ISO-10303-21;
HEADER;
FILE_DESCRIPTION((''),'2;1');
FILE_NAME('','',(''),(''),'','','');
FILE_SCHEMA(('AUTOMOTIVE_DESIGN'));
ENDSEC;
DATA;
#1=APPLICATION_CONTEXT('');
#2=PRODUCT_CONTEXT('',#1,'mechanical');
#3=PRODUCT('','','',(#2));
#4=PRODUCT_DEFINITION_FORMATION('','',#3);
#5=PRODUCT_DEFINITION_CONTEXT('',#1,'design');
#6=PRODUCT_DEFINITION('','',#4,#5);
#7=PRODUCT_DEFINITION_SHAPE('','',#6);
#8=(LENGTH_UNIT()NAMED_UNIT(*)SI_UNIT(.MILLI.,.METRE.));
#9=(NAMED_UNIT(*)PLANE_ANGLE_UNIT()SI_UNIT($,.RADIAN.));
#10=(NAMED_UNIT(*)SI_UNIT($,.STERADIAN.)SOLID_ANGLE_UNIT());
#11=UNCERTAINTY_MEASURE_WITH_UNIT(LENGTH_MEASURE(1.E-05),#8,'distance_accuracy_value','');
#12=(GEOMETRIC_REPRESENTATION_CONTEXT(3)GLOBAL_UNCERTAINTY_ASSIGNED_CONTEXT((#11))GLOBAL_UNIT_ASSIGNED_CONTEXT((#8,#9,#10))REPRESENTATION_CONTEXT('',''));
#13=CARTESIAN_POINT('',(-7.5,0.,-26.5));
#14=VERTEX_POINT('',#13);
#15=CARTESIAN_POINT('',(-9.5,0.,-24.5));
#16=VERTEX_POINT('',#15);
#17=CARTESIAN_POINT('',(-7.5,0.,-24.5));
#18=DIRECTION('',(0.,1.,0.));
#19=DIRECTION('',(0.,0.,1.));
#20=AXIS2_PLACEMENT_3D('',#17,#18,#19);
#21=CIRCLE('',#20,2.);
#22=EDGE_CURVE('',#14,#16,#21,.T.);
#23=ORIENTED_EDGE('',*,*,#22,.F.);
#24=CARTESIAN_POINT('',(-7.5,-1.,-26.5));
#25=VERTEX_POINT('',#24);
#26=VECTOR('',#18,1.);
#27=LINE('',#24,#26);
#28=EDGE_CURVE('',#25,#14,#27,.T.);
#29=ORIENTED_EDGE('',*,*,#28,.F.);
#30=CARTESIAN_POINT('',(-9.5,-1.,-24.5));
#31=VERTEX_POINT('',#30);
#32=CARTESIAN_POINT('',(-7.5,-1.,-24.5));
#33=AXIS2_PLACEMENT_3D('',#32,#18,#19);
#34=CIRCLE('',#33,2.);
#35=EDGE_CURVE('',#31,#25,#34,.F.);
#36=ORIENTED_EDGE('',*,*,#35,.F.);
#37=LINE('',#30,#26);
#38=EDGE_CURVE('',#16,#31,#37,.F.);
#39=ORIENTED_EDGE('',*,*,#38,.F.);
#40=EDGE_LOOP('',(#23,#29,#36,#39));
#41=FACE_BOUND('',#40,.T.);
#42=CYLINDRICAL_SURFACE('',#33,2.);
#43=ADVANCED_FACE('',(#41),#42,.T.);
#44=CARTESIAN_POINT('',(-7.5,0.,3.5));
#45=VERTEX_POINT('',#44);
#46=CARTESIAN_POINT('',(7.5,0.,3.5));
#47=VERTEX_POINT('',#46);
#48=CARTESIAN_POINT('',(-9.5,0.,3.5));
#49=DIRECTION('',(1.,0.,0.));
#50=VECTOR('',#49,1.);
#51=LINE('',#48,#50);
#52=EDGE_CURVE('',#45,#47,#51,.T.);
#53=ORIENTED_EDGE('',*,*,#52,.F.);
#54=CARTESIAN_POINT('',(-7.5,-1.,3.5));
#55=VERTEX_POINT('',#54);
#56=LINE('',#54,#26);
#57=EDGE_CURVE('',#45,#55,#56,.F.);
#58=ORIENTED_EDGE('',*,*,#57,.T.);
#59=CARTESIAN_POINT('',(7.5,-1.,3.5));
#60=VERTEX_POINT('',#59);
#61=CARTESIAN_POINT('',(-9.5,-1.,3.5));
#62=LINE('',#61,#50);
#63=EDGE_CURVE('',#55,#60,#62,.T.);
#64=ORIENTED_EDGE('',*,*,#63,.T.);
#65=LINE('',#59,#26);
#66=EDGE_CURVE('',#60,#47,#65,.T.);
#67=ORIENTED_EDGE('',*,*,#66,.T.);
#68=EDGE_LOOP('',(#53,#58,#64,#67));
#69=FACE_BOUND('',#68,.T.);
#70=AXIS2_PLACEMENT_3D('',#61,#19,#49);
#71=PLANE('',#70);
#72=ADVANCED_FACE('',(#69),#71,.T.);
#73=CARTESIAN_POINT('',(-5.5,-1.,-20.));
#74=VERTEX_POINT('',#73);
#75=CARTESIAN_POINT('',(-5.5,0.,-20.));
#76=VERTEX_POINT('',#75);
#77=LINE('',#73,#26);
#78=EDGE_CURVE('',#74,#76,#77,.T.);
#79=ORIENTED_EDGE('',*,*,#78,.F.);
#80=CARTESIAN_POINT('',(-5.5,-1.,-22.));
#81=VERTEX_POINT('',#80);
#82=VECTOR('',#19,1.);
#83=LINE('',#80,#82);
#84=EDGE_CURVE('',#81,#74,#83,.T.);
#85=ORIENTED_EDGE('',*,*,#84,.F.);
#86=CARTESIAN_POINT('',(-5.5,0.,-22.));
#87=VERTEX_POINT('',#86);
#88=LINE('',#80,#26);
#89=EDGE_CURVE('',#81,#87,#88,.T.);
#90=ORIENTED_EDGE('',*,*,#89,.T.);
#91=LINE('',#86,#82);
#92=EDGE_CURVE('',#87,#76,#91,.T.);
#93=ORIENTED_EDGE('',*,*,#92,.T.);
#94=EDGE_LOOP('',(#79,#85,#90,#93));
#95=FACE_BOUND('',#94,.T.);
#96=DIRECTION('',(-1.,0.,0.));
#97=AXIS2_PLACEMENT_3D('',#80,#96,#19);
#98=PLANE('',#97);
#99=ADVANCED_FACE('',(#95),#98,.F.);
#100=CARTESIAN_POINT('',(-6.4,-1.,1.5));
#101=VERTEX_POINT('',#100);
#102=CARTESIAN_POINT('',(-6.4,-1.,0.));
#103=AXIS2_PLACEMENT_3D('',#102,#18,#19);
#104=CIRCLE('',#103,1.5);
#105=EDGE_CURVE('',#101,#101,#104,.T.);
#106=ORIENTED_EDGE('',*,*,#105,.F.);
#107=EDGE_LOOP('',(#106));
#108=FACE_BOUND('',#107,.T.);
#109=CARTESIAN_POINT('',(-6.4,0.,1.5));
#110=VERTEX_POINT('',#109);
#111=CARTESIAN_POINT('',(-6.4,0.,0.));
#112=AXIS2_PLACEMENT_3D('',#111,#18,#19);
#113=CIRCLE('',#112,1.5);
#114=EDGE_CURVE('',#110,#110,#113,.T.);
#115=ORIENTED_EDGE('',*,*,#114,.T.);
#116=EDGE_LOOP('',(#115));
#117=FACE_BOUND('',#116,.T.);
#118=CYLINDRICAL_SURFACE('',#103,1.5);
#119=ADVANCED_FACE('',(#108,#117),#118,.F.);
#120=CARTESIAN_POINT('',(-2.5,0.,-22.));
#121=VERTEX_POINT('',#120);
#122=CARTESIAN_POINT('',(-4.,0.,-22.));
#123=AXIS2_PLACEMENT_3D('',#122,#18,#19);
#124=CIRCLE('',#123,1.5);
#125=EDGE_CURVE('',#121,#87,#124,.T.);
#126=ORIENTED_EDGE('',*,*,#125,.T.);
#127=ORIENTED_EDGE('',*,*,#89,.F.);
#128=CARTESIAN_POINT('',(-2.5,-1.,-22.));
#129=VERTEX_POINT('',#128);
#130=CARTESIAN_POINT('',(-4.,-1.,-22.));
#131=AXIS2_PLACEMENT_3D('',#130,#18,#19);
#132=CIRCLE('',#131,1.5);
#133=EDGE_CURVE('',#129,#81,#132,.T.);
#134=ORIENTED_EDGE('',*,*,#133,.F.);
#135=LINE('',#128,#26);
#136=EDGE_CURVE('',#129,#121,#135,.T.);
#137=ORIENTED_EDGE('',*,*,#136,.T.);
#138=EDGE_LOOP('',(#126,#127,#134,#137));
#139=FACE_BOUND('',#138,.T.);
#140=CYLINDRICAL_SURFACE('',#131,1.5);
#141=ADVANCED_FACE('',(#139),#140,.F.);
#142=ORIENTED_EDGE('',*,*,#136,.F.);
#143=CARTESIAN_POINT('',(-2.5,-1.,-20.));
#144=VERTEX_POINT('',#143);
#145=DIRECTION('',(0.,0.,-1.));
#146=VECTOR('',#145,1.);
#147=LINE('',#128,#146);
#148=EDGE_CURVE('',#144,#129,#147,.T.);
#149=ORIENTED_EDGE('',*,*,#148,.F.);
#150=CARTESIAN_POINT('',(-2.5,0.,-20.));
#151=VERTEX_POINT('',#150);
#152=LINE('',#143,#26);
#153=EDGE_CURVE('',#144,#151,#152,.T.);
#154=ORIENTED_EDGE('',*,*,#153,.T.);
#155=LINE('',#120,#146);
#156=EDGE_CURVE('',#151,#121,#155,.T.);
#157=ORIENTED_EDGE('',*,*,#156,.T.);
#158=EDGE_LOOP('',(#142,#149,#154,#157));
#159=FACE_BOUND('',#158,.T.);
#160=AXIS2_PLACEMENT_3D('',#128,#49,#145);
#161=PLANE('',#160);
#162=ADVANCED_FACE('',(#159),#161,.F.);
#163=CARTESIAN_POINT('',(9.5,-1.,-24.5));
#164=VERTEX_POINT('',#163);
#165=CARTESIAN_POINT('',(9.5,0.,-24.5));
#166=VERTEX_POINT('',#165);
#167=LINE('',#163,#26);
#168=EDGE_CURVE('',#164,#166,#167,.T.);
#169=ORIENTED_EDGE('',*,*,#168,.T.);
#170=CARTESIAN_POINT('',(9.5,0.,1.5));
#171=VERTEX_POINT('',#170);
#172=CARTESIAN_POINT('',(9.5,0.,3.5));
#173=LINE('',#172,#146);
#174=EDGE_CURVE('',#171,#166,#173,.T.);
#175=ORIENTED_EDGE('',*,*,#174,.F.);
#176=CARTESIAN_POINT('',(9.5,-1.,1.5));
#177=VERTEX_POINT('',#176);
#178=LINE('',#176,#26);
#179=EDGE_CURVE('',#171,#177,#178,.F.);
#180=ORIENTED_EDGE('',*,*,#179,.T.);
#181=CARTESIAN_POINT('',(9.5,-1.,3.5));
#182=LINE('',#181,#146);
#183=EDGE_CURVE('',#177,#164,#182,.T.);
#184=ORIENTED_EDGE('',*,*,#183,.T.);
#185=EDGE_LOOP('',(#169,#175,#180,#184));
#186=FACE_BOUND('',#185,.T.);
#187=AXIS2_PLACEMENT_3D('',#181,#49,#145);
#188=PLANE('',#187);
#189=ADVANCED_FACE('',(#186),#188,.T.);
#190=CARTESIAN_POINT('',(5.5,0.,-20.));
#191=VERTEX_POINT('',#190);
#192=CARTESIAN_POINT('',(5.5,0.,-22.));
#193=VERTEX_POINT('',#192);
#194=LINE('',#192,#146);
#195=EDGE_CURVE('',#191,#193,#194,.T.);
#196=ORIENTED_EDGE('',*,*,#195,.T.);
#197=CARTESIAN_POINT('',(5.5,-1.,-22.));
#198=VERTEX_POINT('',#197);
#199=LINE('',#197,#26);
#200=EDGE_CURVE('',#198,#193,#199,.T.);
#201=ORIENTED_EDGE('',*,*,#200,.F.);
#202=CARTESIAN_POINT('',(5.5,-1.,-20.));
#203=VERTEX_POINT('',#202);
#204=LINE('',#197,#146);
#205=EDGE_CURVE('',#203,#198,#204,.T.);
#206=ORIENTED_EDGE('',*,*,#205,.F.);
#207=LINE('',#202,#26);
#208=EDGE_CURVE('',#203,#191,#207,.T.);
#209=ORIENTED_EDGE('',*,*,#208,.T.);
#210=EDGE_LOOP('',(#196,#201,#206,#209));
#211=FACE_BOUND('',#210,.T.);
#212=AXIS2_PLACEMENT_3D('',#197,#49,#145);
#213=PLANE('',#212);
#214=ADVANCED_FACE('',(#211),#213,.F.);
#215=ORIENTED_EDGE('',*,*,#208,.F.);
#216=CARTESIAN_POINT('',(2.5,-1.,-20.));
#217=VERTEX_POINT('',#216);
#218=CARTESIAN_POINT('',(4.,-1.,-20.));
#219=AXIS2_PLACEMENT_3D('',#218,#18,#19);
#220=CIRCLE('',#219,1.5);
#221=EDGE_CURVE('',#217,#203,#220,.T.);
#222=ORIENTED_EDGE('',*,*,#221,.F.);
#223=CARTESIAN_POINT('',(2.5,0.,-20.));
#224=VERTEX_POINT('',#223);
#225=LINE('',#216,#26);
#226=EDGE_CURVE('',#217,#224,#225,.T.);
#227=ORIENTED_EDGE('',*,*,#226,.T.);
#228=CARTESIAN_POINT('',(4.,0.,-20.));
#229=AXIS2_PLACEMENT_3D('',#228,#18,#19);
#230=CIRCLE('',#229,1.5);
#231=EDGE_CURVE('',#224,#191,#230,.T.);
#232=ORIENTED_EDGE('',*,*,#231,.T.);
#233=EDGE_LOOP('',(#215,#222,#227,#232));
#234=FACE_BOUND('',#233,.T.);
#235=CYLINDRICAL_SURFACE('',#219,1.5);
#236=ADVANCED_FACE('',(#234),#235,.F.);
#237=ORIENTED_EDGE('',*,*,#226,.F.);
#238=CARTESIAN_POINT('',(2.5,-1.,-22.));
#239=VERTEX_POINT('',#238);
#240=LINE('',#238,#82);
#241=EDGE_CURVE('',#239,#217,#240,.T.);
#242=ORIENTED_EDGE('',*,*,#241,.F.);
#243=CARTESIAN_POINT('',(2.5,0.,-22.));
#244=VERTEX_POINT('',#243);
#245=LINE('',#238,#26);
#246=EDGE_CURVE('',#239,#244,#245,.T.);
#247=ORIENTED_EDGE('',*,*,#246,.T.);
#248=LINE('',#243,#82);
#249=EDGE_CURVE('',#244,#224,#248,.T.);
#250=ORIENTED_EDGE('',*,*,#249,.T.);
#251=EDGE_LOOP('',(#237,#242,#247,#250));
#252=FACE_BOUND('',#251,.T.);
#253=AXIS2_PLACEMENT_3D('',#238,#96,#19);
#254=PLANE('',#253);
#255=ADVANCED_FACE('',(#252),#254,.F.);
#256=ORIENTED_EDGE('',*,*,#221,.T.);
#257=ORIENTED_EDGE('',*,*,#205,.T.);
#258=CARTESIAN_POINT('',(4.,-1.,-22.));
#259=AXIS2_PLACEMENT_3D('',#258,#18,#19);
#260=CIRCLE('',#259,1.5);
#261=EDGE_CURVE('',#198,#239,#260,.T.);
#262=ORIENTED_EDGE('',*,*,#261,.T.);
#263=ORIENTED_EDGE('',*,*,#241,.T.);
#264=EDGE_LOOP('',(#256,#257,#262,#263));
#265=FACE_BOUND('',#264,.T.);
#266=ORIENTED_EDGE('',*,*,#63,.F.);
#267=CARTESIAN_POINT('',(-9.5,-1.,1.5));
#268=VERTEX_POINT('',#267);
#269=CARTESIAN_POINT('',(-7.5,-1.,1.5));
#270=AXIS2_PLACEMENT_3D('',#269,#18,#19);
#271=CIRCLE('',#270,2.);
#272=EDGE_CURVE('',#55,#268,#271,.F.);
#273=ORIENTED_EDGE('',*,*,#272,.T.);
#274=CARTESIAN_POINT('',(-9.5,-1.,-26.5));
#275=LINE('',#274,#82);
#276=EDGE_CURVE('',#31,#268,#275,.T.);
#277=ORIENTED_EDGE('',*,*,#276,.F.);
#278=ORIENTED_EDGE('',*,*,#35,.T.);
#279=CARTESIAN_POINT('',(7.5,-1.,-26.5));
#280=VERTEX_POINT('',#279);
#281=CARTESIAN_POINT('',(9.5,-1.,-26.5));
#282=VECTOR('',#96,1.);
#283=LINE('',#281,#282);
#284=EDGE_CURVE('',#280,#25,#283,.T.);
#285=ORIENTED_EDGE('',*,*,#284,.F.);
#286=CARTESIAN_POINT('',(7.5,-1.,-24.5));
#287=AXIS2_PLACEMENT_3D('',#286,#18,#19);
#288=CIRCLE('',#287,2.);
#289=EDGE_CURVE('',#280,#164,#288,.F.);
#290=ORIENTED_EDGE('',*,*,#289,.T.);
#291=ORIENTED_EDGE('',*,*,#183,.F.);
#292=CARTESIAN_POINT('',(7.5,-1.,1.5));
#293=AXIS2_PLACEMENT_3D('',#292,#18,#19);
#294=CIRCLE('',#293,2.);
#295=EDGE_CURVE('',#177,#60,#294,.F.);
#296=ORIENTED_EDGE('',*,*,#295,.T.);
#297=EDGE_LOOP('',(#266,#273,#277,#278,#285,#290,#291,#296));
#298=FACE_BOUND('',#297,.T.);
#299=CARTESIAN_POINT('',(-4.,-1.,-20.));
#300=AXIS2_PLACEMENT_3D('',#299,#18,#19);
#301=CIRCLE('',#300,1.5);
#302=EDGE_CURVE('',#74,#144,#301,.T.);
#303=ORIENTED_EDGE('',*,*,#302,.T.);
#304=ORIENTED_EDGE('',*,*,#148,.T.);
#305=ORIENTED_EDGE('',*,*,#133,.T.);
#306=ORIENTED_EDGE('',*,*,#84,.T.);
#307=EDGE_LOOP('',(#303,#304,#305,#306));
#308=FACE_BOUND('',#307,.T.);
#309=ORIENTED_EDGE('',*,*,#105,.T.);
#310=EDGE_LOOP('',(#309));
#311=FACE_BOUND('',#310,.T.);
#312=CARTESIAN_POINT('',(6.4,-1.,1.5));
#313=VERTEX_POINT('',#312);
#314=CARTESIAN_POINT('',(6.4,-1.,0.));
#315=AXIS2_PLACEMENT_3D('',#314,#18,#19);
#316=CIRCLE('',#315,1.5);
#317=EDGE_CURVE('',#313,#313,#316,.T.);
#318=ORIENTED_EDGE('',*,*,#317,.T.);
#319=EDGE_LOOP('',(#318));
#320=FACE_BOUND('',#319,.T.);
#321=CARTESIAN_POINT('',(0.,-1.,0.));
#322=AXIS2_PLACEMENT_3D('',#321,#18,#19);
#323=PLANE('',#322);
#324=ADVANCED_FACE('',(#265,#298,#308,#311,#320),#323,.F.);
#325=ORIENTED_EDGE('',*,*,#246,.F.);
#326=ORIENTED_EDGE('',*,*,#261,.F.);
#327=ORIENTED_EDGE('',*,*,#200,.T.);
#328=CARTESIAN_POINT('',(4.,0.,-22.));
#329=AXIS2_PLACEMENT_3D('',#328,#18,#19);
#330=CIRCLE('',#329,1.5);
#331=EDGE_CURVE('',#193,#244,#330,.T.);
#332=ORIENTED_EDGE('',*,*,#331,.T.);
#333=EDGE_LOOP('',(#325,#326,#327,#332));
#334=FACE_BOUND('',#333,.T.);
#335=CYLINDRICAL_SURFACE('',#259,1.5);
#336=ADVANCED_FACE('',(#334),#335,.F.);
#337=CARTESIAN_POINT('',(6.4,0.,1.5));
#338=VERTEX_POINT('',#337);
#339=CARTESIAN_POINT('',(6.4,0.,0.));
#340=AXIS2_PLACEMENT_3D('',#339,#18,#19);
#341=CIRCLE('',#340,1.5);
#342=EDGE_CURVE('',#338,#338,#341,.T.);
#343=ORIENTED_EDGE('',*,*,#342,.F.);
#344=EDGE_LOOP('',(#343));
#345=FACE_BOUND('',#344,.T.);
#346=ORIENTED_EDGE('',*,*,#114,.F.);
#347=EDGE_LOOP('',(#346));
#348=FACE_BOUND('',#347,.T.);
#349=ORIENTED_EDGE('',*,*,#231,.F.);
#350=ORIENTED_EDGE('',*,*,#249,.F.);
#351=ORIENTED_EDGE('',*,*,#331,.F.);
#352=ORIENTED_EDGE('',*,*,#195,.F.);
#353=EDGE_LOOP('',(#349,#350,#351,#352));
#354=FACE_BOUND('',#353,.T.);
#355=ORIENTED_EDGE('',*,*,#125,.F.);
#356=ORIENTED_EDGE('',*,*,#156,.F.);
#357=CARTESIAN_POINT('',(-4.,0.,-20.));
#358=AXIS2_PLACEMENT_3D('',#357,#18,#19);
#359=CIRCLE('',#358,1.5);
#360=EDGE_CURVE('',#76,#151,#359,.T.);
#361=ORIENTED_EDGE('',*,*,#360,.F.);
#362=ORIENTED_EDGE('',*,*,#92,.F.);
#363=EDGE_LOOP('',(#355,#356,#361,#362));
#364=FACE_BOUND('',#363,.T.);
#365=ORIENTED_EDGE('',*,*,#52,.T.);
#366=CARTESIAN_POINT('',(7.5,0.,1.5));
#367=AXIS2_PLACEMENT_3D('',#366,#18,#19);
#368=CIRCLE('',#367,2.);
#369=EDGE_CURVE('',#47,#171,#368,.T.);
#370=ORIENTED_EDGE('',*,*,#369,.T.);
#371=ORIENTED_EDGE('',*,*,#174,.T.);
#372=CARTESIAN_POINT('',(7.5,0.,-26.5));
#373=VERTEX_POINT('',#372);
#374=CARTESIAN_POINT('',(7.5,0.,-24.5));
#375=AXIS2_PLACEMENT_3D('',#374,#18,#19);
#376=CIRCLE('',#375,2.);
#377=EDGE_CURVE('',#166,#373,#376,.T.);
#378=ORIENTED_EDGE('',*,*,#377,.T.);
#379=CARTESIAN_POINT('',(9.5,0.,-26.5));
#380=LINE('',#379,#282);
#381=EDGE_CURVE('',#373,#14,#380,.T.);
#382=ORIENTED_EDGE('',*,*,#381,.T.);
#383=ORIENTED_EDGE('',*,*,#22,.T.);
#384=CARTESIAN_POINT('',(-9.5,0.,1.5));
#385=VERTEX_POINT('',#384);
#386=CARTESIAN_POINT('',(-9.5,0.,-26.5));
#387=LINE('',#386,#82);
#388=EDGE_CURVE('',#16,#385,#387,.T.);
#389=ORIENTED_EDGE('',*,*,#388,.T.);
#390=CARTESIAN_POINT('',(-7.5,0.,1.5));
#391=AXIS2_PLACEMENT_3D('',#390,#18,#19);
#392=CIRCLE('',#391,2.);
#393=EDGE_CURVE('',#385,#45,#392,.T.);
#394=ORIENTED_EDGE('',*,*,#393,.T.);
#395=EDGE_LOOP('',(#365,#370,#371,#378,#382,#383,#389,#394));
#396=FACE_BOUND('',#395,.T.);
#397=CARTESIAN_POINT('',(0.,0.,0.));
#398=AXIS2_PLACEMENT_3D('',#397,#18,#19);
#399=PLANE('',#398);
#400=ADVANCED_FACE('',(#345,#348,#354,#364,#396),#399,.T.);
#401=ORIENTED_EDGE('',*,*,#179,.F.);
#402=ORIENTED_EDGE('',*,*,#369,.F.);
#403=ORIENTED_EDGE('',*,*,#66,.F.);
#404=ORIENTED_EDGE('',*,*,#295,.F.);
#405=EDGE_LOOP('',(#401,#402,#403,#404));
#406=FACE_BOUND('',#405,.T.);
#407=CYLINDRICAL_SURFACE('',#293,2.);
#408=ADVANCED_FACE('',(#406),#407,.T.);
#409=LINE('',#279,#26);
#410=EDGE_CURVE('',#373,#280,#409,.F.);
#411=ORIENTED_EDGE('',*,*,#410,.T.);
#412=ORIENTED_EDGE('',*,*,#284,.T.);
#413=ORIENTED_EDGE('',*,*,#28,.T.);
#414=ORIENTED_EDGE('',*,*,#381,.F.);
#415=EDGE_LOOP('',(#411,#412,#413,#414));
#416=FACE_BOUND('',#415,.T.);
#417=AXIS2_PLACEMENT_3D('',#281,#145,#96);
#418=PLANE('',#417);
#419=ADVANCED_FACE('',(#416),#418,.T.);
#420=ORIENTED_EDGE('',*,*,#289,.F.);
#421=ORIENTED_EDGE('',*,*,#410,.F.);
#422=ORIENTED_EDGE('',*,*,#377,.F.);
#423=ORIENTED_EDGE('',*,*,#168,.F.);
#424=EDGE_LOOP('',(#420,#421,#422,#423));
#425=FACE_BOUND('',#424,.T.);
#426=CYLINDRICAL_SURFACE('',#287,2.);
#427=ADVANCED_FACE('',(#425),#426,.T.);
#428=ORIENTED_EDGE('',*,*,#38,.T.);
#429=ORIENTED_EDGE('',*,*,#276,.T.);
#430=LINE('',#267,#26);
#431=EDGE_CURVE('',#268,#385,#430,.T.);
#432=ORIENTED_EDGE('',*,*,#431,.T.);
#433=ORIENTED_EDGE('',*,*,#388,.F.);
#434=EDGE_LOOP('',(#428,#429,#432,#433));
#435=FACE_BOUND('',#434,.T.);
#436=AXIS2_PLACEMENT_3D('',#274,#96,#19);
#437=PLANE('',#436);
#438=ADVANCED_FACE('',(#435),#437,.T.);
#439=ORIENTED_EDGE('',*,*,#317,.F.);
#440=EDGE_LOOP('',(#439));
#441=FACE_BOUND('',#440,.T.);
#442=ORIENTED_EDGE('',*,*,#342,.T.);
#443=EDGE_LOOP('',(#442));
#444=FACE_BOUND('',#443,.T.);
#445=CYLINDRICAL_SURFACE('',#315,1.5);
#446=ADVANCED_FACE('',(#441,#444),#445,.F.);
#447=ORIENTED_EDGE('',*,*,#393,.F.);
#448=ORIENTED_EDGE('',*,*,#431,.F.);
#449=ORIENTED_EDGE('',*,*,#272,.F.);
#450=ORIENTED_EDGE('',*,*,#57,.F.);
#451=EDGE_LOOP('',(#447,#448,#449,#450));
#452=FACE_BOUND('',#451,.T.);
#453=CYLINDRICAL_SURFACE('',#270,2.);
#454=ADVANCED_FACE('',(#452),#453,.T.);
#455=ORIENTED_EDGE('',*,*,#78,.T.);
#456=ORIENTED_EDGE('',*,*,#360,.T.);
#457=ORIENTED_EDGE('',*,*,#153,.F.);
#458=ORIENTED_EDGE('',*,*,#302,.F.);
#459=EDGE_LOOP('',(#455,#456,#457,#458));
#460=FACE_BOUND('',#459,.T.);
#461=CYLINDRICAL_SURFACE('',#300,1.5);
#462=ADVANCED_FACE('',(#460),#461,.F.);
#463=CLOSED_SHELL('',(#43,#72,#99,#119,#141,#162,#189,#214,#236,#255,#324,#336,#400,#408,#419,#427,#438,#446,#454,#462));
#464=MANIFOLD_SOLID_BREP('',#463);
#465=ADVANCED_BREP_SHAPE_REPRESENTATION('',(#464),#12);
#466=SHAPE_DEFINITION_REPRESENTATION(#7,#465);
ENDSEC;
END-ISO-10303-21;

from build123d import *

# Parameters (mm, degrees)
SKETCH_1_W             = 19
SKETCH_1_H             = 30
SKETCH_1_R             = 1.5
SM_BASE_FLANGE_1_DEPTH = 1
FILLET_1_R             = 2


# Sheet-metal steps are written as plain solids
with BuildPart() as part:
    # Sketch 1 → 基体-法兰1 (new body)
    with BuildSketch(Plane(origin=(0, 0, 0), x_dir=(1, 0, 0), z_dir=(0, 1, 0))):
        with Locations((0, 11.5)):
            Rectangle(SKETCH_1_W, SKETCH_1_H)
        with Locations(Location((-6.4, 0, 0), (0, 0, 270))):
            Circle(SKETCH_1_R, mode=Mode.SUBTRACT)
        with Locations(Location((6.4, 0, 0), (0, 0, 270))):
            Circle(SKETCH_1_R, mode=Mode.SUBTRACT)
        with BuildLine():
            Line((-2.5, 22), (-2.5, 20))
            ThreePointArc((-2.5, 20), (-4, 18.5), (-5.5, 20))
            Line((-5.5, 20), (-5.5, 22))
            ThreePointArc((-5.5, 22), (-4, 23.5), (-2.5, 22))
        make_face(mode=Mode.SUBTRACT)
        with BuildLine():
            Line((5.5, 22), (5.5, 20))
            ThreePointArc((5.5, 20), (4, 18.5), (2.5, 20))
            Line((2.5, 20), (2.5, 22))
            ThreePointArc((2.5, 22), (4, 23.5), (5.5, 22))
        make_face(mode=Mode.SUBTRACT)
    extrude(amount=-SM_BASE_FLANGE_1_DEPTH)

    # 圆角1
    fillet_1_edges = [part.edges().sort_by_distance(p)[0] for p in [
        (9.5, -0.5, -26.5),
        (9.5, -0.5, 3.5),
        (-9.5, -0.5, 3.5),
        (-9.5, -0.5, -26.5),
    ]]
    fillet(fillet_1_edges, radius=FILLET_1_R)


solid = part.part
